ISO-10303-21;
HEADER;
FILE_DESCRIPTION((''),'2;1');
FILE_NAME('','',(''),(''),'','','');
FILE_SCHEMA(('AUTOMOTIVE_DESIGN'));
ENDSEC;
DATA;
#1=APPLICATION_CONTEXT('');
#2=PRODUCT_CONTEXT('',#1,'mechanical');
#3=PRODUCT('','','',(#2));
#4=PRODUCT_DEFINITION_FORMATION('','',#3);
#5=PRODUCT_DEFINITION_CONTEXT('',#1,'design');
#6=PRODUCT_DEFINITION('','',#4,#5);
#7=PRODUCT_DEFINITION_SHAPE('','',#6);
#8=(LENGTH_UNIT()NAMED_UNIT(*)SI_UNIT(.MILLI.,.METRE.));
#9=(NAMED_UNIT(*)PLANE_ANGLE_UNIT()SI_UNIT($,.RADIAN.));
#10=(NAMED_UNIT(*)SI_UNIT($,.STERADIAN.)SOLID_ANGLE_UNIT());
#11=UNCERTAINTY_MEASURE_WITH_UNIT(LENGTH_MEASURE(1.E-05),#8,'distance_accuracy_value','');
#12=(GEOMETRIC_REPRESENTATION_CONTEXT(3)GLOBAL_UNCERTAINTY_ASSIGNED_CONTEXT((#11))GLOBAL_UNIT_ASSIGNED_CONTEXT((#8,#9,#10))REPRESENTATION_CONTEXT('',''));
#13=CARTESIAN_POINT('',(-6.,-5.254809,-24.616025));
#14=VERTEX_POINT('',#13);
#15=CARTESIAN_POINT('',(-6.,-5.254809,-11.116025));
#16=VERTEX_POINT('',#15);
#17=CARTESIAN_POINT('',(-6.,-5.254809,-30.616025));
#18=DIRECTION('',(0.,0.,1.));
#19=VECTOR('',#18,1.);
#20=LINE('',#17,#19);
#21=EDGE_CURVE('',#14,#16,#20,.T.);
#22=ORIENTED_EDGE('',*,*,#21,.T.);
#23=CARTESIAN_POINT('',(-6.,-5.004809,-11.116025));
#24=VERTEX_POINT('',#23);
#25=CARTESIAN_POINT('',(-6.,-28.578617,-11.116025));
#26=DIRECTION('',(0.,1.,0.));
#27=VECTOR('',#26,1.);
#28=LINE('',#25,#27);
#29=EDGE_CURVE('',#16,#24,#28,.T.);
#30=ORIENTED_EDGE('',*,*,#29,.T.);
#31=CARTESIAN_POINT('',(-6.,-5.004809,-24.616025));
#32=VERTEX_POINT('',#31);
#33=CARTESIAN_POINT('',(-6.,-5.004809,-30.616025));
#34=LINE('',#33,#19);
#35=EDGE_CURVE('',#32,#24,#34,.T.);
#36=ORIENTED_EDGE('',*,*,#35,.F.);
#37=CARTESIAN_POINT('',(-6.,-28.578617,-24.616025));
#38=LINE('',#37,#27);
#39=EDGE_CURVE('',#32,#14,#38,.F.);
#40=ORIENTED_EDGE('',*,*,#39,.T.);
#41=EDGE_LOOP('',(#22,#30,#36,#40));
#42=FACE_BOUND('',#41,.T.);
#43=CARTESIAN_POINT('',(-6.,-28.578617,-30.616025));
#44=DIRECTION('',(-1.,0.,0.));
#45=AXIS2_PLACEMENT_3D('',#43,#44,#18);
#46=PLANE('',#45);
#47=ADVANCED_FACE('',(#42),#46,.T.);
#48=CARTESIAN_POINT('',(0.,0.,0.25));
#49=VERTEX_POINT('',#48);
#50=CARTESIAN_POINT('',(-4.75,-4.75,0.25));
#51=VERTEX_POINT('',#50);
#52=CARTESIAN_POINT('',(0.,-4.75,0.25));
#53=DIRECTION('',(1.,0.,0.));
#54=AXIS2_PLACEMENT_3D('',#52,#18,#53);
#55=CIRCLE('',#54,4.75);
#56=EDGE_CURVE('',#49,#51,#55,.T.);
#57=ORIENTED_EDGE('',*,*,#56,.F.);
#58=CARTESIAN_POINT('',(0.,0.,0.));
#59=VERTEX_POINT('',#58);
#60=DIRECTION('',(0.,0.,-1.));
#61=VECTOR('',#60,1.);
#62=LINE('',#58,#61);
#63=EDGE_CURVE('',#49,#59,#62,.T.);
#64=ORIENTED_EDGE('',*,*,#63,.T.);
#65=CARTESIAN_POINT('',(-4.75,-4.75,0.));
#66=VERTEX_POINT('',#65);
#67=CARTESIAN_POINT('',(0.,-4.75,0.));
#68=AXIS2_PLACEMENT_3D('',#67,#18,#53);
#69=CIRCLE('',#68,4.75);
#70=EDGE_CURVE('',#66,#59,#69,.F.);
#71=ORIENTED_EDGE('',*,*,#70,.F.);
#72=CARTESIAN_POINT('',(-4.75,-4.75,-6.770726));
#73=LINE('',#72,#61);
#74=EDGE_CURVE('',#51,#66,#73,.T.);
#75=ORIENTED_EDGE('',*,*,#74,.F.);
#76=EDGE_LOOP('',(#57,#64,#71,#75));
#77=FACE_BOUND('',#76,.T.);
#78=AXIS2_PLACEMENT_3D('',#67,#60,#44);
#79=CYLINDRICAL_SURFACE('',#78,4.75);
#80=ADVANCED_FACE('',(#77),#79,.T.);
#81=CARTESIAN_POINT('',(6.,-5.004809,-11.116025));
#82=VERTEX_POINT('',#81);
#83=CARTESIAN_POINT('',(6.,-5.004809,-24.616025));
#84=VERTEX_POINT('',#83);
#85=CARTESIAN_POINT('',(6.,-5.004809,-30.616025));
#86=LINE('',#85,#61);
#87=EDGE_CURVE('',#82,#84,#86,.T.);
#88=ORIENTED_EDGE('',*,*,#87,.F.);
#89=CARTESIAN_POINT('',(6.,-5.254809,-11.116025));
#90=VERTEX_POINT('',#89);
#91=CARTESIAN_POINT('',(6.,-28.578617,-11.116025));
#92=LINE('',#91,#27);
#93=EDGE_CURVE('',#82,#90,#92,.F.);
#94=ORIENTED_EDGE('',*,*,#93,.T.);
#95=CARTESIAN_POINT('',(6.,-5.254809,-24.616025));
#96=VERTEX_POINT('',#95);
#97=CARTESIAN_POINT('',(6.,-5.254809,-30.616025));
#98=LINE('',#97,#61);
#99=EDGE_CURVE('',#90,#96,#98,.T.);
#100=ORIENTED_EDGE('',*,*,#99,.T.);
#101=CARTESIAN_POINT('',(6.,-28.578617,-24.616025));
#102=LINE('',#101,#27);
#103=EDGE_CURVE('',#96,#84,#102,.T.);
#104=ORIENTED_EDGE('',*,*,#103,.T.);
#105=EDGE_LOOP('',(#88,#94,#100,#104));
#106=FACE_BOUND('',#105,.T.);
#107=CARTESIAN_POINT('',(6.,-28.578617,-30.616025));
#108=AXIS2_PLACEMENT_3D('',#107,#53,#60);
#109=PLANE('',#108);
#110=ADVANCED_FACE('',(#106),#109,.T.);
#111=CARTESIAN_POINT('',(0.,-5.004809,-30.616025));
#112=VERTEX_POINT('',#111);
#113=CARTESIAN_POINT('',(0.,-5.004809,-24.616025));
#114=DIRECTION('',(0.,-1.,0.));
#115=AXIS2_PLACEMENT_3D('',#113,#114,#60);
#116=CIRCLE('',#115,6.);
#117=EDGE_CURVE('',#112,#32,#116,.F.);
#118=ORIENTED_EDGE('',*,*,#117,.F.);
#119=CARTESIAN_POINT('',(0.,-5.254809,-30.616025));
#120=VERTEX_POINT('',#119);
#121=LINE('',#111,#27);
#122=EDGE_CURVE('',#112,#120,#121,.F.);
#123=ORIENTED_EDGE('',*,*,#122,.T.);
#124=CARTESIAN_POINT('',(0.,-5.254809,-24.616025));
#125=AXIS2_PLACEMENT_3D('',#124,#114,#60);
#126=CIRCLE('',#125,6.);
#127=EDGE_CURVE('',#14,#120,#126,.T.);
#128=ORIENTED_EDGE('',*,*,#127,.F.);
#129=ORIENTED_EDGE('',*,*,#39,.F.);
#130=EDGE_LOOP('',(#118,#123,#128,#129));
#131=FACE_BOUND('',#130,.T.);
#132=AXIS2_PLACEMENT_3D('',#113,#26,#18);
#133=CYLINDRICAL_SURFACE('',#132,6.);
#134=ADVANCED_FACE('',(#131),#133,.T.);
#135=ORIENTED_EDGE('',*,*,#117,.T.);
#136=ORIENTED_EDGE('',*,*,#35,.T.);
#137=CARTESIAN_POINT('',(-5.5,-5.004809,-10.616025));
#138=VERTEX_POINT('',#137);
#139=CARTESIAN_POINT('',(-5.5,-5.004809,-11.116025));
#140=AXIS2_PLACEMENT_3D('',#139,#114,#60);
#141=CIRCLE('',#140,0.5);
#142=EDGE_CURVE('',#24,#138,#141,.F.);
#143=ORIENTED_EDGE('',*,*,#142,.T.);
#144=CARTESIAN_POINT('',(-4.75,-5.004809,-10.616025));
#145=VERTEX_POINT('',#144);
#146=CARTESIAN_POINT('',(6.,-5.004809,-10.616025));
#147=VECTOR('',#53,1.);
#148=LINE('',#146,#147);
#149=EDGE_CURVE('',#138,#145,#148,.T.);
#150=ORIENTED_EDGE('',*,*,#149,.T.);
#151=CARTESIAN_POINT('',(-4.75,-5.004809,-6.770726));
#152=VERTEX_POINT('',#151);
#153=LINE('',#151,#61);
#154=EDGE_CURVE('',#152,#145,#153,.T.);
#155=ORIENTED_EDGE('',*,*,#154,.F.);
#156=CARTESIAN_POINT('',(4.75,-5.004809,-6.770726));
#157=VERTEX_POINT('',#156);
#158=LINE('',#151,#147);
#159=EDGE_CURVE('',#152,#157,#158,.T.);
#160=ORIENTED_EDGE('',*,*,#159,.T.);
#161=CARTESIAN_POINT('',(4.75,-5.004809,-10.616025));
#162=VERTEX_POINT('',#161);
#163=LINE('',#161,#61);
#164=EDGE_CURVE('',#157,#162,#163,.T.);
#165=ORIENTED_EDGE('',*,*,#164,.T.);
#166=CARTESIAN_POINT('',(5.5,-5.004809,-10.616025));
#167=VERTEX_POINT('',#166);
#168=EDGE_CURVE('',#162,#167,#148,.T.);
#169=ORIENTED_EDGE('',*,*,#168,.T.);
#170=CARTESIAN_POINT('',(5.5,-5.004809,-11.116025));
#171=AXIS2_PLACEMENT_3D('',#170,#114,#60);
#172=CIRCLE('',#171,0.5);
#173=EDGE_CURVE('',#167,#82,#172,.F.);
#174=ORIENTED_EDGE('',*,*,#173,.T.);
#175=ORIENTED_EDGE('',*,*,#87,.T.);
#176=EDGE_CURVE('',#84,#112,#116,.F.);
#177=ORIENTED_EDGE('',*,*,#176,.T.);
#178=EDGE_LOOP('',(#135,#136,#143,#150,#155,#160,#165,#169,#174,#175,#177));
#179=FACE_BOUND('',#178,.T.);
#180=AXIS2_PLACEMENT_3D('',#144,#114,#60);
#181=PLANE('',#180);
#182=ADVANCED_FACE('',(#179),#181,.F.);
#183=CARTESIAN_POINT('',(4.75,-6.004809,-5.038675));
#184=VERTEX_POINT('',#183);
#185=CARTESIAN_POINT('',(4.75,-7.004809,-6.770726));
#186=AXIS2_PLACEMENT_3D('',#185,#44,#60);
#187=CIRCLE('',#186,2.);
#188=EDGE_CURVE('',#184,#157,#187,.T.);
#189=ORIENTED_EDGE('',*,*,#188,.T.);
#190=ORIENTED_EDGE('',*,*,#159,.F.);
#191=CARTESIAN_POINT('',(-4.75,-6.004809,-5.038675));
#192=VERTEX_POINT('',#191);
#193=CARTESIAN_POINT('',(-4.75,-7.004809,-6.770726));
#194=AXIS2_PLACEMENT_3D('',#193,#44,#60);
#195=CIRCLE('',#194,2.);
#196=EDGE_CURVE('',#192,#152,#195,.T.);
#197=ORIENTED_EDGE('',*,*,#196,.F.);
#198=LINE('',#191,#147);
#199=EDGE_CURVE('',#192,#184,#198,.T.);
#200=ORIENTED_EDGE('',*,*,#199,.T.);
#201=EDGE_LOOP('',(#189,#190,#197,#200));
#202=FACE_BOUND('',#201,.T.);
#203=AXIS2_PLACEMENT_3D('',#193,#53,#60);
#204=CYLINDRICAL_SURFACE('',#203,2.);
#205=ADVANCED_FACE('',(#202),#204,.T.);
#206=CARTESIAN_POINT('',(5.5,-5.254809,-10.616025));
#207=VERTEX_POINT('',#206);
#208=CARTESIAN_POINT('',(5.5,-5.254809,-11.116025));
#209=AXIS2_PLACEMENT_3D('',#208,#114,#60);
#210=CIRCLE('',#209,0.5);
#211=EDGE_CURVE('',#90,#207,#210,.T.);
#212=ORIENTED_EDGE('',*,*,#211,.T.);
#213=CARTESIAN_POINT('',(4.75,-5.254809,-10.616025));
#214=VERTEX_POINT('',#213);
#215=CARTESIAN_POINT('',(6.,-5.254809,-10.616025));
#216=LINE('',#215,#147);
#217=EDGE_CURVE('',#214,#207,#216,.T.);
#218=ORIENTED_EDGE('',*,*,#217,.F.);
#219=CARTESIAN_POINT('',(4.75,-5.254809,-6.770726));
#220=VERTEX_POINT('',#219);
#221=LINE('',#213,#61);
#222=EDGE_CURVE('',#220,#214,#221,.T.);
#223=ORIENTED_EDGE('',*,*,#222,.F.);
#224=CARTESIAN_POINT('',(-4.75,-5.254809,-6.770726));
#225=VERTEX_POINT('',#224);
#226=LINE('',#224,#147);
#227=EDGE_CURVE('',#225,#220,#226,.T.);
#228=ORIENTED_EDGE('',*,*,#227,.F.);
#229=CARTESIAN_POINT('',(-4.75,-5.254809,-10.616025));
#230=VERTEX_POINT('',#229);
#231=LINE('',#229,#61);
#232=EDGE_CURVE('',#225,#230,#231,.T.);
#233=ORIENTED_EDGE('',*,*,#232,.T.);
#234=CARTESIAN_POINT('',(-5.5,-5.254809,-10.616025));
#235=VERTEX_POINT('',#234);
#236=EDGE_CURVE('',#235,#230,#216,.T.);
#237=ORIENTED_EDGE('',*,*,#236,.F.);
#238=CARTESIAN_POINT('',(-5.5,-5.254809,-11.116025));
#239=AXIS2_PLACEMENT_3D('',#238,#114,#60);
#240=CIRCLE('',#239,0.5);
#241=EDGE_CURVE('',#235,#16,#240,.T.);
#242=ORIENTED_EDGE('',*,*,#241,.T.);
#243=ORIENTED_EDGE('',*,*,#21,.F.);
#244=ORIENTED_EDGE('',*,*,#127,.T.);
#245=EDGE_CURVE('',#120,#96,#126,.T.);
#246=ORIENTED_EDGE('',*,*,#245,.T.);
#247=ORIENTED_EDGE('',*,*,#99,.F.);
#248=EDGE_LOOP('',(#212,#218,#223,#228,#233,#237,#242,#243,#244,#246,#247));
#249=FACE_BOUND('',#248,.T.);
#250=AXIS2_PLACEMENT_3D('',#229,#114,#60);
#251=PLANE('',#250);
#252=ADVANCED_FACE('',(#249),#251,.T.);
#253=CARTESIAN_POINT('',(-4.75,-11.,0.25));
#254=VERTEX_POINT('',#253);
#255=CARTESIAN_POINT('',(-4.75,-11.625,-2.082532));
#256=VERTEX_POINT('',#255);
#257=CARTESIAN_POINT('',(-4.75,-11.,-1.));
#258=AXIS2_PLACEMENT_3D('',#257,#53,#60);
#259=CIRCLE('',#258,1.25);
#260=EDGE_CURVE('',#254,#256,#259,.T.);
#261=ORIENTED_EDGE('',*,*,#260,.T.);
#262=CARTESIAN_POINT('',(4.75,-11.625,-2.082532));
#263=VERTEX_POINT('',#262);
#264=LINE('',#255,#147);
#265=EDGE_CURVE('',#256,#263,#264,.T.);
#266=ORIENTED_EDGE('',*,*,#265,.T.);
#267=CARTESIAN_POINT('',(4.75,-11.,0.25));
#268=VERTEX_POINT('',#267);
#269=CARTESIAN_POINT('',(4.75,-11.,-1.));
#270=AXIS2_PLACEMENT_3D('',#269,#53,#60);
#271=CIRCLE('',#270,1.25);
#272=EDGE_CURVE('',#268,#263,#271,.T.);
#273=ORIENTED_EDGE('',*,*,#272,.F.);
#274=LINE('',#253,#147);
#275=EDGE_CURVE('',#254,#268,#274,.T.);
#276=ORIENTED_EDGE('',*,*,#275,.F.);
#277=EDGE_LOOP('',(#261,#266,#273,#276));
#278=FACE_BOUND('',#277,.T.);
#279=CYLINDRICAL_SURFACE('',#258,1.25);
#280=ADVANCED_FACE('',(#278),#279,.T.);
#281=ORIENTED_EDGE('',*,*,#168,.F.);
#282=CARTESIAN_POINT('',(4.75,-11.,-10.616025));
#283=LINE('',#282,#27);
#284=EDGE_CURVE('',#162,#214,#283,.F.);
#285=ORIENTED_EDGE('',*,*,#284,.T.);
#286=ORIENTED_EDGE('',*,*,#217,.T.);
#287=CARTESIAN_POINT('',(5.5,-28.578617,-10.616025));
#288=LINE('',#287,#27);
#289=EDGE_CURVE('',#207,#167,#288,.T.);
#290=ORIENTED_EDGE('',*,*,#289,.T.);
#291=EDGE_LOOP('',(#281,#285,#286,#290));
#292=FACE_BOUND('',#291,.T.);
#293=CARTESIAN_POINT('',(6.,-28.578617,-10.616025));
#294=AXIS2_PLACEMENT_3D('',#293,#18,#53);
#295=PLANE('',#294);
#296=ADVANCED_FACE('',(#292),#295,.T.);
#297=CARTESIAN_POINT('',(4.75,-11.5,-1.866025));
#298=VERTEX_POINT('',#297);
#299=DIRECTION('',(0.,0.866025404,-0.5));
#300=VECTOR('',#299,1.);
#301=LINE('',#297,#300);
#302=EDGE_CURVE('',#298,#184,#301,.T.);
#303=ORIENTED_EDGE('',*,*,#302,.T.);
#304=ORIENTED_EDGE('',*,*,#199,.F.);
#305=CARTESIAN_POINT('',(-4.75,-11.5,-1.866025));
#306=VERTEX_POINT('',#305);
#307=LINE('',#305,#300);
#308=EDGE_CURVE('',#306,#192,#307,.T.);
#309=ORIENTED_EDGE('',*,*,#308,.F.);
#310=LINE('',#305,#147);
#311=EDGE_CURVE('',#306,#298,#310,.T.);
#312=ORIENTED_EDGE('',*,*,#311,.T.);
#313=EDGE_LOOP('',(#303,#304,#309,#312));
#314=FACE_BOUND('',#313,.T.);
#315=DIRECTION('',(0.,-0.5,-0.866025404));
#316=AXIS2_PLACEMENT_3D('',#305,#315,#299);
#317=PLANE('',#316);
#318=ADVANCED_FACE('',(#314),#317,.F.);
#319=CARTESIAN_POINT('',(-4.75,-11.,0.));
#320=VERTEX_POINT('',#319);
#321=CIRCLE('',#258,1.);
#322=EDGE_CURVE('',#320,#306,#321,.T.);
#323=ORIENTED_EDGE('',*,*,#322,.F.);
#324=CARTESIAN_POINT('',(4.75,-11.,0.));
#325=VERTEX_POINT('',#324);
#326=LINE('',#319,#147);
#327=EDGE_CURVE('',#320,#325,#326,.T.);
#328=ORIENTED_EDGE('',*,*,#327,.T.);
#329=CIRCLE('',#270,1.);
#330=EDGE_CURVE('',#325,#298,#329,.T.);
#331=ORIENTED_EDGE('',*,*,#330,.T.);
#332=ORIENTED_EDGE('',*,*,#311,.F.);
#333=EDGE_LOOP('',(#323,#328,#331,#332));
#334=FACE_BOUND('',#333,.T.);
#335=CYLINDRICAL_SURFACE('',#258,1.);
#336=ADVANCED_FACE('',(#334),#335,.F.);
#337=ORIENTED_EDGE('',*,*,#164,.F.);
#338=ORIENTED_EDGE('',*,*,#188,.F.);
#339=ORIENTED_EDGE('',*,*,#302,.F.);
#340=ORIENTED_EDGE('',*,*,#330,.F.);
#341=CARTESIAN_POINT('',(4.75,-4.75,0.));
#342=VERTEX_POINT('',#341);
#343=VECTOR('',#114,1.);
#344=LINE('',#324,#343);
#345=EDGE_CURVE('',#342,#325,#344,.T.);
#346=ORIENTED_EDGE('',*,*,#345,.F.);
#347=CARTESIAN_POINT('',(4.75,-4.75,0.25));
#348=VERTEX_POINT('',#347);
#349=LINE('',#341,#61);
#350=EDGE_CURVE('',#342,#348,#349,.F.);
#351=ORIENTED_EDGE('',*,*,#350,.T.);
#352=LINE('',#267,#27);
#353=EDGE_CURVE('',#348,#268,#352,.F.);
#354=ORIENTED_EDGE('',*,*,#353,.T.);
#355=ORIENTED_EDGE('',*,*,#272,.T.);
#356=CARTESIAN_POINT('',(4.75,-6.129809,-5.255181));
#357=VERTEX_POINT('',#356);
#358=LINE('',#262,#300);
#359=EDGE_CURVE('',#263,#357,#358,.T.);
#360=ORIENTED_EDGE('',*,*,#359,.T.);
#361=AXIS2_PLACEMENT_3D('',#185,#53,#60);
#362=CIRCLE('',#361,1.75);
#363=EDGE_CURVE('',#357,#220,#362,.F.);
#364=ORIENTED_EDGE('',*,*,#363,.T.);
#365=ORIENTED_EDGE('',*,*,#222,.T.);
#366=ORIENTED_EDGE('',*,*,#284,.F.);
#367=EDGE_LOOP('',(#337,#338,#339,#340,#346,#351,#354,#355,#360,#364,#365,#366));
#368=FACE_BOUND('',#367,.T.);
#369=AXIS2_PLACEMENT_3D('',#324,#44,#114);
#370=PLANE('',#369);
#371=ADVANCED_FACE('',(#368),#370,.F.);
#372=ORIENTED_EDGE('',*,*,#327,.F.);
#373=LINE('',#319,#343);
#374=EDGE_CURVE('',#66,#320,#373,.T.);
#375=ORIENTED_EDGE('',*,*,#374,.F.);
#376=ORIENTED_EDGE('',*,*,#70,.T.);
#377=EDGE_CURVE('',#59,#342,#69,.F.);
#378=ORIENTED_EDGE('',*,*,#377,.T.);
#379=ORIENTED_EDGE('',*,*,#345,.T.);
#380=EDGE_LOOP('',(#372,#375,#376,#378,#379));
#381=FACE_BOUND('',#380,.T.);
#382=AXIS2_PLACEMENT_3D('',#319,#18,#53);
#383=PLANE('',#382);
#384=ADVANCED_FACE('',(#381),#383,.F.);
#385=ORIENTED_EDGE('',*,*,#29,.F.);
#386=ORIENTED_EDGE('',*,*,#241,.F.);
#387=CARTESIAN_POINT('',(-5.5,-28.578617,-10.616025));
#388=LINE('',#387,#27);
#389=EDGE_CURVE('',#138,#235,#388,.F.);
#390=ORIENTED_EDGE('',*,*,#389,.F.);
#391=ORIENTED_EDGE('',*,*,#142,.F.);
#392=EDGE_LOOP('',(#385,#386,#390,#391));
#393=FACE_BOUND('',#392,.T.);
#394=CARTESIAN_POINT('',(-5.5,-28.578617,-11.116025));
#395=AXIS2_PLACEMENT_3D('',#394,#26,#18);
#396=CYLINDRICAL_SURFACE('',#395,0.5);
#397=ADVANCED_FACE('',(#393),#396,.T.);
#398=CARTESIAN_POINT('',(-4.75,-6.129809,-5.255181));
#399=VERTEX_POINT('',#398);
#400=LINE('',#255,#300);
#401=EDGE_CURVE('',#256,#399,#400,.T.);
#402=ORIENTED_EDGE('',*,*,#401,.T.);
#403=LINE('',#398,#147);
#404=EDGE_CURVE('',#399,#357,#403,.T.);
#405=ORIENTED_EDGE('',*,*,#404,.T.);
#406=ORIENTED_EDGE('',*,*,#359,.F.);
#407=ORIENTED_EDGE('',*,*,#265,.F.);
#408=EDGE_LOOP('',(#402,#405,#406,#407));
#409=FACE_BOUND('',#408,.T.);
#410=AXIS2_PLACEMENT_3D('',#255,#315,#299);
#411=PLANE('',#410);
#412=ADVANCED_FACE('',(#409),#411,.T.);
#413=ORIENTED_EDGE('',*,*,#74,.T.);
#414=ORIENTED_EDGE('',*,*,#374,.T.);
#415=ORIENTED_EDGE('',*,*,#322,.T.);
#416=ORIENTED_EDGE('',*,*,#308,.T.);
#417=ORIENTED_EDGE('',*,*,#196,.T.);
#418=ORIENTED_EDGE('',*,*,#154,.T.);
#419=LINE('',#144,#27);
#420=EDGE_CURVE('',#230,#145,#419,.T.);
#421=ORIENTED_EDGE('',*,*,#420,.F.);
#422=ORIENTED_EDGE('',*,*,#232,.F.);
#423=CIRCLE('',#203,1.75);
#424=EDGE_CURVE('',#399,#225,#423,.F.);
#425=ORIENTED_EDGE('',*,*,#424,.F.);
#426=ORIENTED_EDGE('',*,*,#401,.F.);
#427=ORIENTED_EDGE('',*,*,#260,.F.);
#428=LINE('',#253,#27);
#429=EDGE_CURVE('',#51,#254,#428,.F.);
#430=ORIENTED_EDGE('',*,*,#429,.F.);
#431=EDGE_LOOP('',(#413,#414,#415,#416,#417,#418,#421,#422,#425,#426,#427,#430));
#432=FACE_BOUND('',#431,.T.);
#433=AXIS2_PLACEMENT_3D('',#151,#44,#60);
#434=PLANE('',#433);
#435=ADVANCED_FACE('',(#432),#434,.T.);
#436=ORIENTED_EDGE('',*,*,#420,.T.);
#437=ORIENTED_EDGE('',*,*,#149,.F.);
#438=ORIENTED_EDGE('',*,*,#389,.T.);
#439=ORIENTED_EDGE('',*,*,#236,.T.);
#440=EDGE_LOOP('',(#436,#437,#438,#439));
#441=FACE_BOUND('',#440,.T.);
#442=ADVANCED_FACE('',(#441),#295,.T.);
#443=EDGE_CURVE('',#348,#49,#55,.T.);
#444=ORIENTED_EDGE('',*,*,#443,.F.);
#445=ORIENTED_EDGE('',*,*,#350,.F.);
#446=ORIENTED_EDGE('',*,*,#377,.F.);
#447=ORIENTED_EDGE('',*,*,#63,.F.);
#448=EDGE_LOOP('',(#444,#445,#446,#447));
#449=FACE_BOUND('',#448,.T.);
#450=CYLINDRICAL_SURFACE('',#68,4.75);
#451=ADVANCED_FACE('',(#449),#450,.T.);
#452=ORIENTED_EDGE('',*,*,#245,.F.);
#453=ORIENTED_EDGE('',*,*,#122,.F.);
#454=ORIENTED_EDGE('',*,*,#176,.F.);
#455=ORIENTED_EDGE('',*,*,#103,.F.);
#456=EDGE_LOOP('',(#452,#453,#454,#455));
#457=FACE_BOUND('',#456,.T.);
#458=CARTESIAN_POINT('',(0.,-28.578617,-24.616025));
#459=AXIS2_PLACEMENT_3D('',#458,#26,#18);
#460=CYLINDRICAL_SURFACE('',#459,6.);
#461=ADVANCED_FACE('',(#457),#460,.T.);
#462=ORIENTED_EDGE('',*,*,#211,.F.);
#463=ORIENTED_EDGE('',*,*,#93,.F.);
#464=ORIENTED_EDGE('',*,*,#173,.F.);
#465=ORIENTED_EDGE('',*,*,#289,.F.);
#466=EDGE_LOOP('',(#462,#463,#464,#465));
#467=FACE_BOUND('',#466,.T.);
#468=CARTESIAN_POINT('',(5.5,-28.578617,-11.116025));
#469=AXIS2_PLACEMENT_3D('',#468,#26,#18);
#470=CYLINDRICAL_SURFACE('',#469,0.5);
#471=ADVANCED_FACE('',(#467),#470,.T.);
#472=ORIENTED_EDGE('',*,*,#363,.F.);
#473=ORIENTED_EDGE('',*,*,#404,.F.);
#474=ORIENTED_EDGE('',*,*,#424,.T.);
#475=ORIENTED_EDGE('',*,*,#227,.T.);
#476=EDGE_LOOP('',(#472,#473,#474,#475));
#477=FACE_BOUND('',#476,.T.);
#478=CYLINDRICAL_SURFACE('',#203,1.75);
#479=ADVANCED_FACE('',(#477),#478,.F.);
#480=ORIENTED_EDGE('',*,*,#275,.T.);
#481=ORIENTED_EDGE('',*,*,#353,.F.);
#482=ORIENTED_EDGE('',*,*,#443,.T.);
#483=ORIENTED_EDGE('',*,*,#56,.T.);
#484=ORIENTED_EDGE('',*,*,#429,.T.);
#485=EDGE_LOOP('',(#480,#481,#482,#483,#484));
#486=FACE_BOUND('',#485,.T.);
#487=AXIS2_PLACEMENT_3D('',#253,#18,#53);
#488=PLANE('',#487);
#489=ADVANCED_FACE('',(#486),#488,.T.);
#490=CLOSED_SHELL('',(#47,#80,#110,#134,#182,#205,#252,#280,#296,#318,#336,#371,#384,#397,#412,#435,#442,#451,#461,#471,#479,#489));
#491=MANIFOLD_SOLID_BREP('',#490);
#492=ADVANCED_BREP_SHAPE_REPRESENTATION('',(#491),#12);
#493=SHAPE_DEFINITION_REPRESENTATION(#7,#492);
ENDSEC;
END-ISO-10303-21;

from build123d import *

# Parameters (mm, degrees)
SURFACE_EXTRUDE1_1_BACK  = 4.75
SURFACE_EXTRUDE1_1_DEPTH = 9.5
THICKEN1_T1              = 0.25
FILLET1_R                = 4.75
SKETCH2_W                = 12
SKETCH2_H                = 20
BOSS_EXTRUDE1_DEPTH      = 0.25
FILLET2_R                = 6
FILLET3_R                = 0.5


with BuildPart() as body_1:
    # Surface-Extrude1: a surface, the sketch's curves swept straight by 9.5 mm
    with BuildLine(Plane(origin=(0, 0, 0), x_dir=(0, 0, -1), z_dir=(1, 0, 0)).offset(-SURFACE_EXTRUDE1_1_BACK), mode=Mode.PRIVATE) as surface_extrude1_1_path:
        Line((30.616025404, -5.004809472), (10.616025404, -5.004809472))
        Line((10.616025404, -5.004809472), (6.770725942, -5.004809472))
        ThreePointArc((6.770725942, -5.004809472), (5.770725942, -5.272758664), (5.038675135, -6.004809472))
        Line((5.038675135, -6.004809472), (1.866025404, -11.5))
        ThreePointArc((1.866025404, -11.5), (0.741180955, -11.965925826), (0, -11))
        Line((0, -11), (0, 0))
    surface_extrude1_1 = Shell.extrude(surface_extrude1_1_path.wire(), (1 * SURFACE_EXTRUDE1_1_DEPTH, 0 * SURFACE_EXTRUDE1_1_DEPTH, 0 * SURFACE_EXTRUDE1_1_DEPTH))
    add(Solid.thicken(surface_extrude1_1, THICKEN1_T1))

    # Fillet1
    fillet1_edges = [body_1.edges().sort_by_distance(p)[0] for p in [
        (4.75, 0, 0.125),
        (-4.75, 0, 0.125),
    ]]
    fillet(fillet1_edges, radius=FILLET1_R - 0.0001)  # a hair under: the kernel refuses the full size

    # Sketch2 → Boss-Extrude1 (add)
    with BuildSketch(Plane(origin=(0, -5.004809472, 0), x_dir=(1, 0, 0), z_dir=(0, 1, 0))):
        with Locations((0, 20.616025404)):
            Rectangle(SKETCH2_W, SKETCH2_H)
    extrude(amount=-BOSS_EXTRUDE1_DEPTH)

    # Fillet2
    fillet2_edges = [body_1.edges().sort_by_distance(p)[0] for p in [
        (-6, -5.129809472, -30.616025404),
        (6, -5.129809472, -30.616025404),
    ]]
    fillet(fillet2_edges, radius=FILLET2_R - 0.0001)  # a hair under: the kernel refuses the full size

    # Fillet3
    fillet3_edges = [body_1.edges().sort_by_distance(p)[0] for p in [
        (-6, -5.129809472, -10.616025404),
        (6, -5.129809472, -10.616025404),
    ]]
    fillet(fillet3_edges, radius=FILLET3_R)


solid = body_1.part
